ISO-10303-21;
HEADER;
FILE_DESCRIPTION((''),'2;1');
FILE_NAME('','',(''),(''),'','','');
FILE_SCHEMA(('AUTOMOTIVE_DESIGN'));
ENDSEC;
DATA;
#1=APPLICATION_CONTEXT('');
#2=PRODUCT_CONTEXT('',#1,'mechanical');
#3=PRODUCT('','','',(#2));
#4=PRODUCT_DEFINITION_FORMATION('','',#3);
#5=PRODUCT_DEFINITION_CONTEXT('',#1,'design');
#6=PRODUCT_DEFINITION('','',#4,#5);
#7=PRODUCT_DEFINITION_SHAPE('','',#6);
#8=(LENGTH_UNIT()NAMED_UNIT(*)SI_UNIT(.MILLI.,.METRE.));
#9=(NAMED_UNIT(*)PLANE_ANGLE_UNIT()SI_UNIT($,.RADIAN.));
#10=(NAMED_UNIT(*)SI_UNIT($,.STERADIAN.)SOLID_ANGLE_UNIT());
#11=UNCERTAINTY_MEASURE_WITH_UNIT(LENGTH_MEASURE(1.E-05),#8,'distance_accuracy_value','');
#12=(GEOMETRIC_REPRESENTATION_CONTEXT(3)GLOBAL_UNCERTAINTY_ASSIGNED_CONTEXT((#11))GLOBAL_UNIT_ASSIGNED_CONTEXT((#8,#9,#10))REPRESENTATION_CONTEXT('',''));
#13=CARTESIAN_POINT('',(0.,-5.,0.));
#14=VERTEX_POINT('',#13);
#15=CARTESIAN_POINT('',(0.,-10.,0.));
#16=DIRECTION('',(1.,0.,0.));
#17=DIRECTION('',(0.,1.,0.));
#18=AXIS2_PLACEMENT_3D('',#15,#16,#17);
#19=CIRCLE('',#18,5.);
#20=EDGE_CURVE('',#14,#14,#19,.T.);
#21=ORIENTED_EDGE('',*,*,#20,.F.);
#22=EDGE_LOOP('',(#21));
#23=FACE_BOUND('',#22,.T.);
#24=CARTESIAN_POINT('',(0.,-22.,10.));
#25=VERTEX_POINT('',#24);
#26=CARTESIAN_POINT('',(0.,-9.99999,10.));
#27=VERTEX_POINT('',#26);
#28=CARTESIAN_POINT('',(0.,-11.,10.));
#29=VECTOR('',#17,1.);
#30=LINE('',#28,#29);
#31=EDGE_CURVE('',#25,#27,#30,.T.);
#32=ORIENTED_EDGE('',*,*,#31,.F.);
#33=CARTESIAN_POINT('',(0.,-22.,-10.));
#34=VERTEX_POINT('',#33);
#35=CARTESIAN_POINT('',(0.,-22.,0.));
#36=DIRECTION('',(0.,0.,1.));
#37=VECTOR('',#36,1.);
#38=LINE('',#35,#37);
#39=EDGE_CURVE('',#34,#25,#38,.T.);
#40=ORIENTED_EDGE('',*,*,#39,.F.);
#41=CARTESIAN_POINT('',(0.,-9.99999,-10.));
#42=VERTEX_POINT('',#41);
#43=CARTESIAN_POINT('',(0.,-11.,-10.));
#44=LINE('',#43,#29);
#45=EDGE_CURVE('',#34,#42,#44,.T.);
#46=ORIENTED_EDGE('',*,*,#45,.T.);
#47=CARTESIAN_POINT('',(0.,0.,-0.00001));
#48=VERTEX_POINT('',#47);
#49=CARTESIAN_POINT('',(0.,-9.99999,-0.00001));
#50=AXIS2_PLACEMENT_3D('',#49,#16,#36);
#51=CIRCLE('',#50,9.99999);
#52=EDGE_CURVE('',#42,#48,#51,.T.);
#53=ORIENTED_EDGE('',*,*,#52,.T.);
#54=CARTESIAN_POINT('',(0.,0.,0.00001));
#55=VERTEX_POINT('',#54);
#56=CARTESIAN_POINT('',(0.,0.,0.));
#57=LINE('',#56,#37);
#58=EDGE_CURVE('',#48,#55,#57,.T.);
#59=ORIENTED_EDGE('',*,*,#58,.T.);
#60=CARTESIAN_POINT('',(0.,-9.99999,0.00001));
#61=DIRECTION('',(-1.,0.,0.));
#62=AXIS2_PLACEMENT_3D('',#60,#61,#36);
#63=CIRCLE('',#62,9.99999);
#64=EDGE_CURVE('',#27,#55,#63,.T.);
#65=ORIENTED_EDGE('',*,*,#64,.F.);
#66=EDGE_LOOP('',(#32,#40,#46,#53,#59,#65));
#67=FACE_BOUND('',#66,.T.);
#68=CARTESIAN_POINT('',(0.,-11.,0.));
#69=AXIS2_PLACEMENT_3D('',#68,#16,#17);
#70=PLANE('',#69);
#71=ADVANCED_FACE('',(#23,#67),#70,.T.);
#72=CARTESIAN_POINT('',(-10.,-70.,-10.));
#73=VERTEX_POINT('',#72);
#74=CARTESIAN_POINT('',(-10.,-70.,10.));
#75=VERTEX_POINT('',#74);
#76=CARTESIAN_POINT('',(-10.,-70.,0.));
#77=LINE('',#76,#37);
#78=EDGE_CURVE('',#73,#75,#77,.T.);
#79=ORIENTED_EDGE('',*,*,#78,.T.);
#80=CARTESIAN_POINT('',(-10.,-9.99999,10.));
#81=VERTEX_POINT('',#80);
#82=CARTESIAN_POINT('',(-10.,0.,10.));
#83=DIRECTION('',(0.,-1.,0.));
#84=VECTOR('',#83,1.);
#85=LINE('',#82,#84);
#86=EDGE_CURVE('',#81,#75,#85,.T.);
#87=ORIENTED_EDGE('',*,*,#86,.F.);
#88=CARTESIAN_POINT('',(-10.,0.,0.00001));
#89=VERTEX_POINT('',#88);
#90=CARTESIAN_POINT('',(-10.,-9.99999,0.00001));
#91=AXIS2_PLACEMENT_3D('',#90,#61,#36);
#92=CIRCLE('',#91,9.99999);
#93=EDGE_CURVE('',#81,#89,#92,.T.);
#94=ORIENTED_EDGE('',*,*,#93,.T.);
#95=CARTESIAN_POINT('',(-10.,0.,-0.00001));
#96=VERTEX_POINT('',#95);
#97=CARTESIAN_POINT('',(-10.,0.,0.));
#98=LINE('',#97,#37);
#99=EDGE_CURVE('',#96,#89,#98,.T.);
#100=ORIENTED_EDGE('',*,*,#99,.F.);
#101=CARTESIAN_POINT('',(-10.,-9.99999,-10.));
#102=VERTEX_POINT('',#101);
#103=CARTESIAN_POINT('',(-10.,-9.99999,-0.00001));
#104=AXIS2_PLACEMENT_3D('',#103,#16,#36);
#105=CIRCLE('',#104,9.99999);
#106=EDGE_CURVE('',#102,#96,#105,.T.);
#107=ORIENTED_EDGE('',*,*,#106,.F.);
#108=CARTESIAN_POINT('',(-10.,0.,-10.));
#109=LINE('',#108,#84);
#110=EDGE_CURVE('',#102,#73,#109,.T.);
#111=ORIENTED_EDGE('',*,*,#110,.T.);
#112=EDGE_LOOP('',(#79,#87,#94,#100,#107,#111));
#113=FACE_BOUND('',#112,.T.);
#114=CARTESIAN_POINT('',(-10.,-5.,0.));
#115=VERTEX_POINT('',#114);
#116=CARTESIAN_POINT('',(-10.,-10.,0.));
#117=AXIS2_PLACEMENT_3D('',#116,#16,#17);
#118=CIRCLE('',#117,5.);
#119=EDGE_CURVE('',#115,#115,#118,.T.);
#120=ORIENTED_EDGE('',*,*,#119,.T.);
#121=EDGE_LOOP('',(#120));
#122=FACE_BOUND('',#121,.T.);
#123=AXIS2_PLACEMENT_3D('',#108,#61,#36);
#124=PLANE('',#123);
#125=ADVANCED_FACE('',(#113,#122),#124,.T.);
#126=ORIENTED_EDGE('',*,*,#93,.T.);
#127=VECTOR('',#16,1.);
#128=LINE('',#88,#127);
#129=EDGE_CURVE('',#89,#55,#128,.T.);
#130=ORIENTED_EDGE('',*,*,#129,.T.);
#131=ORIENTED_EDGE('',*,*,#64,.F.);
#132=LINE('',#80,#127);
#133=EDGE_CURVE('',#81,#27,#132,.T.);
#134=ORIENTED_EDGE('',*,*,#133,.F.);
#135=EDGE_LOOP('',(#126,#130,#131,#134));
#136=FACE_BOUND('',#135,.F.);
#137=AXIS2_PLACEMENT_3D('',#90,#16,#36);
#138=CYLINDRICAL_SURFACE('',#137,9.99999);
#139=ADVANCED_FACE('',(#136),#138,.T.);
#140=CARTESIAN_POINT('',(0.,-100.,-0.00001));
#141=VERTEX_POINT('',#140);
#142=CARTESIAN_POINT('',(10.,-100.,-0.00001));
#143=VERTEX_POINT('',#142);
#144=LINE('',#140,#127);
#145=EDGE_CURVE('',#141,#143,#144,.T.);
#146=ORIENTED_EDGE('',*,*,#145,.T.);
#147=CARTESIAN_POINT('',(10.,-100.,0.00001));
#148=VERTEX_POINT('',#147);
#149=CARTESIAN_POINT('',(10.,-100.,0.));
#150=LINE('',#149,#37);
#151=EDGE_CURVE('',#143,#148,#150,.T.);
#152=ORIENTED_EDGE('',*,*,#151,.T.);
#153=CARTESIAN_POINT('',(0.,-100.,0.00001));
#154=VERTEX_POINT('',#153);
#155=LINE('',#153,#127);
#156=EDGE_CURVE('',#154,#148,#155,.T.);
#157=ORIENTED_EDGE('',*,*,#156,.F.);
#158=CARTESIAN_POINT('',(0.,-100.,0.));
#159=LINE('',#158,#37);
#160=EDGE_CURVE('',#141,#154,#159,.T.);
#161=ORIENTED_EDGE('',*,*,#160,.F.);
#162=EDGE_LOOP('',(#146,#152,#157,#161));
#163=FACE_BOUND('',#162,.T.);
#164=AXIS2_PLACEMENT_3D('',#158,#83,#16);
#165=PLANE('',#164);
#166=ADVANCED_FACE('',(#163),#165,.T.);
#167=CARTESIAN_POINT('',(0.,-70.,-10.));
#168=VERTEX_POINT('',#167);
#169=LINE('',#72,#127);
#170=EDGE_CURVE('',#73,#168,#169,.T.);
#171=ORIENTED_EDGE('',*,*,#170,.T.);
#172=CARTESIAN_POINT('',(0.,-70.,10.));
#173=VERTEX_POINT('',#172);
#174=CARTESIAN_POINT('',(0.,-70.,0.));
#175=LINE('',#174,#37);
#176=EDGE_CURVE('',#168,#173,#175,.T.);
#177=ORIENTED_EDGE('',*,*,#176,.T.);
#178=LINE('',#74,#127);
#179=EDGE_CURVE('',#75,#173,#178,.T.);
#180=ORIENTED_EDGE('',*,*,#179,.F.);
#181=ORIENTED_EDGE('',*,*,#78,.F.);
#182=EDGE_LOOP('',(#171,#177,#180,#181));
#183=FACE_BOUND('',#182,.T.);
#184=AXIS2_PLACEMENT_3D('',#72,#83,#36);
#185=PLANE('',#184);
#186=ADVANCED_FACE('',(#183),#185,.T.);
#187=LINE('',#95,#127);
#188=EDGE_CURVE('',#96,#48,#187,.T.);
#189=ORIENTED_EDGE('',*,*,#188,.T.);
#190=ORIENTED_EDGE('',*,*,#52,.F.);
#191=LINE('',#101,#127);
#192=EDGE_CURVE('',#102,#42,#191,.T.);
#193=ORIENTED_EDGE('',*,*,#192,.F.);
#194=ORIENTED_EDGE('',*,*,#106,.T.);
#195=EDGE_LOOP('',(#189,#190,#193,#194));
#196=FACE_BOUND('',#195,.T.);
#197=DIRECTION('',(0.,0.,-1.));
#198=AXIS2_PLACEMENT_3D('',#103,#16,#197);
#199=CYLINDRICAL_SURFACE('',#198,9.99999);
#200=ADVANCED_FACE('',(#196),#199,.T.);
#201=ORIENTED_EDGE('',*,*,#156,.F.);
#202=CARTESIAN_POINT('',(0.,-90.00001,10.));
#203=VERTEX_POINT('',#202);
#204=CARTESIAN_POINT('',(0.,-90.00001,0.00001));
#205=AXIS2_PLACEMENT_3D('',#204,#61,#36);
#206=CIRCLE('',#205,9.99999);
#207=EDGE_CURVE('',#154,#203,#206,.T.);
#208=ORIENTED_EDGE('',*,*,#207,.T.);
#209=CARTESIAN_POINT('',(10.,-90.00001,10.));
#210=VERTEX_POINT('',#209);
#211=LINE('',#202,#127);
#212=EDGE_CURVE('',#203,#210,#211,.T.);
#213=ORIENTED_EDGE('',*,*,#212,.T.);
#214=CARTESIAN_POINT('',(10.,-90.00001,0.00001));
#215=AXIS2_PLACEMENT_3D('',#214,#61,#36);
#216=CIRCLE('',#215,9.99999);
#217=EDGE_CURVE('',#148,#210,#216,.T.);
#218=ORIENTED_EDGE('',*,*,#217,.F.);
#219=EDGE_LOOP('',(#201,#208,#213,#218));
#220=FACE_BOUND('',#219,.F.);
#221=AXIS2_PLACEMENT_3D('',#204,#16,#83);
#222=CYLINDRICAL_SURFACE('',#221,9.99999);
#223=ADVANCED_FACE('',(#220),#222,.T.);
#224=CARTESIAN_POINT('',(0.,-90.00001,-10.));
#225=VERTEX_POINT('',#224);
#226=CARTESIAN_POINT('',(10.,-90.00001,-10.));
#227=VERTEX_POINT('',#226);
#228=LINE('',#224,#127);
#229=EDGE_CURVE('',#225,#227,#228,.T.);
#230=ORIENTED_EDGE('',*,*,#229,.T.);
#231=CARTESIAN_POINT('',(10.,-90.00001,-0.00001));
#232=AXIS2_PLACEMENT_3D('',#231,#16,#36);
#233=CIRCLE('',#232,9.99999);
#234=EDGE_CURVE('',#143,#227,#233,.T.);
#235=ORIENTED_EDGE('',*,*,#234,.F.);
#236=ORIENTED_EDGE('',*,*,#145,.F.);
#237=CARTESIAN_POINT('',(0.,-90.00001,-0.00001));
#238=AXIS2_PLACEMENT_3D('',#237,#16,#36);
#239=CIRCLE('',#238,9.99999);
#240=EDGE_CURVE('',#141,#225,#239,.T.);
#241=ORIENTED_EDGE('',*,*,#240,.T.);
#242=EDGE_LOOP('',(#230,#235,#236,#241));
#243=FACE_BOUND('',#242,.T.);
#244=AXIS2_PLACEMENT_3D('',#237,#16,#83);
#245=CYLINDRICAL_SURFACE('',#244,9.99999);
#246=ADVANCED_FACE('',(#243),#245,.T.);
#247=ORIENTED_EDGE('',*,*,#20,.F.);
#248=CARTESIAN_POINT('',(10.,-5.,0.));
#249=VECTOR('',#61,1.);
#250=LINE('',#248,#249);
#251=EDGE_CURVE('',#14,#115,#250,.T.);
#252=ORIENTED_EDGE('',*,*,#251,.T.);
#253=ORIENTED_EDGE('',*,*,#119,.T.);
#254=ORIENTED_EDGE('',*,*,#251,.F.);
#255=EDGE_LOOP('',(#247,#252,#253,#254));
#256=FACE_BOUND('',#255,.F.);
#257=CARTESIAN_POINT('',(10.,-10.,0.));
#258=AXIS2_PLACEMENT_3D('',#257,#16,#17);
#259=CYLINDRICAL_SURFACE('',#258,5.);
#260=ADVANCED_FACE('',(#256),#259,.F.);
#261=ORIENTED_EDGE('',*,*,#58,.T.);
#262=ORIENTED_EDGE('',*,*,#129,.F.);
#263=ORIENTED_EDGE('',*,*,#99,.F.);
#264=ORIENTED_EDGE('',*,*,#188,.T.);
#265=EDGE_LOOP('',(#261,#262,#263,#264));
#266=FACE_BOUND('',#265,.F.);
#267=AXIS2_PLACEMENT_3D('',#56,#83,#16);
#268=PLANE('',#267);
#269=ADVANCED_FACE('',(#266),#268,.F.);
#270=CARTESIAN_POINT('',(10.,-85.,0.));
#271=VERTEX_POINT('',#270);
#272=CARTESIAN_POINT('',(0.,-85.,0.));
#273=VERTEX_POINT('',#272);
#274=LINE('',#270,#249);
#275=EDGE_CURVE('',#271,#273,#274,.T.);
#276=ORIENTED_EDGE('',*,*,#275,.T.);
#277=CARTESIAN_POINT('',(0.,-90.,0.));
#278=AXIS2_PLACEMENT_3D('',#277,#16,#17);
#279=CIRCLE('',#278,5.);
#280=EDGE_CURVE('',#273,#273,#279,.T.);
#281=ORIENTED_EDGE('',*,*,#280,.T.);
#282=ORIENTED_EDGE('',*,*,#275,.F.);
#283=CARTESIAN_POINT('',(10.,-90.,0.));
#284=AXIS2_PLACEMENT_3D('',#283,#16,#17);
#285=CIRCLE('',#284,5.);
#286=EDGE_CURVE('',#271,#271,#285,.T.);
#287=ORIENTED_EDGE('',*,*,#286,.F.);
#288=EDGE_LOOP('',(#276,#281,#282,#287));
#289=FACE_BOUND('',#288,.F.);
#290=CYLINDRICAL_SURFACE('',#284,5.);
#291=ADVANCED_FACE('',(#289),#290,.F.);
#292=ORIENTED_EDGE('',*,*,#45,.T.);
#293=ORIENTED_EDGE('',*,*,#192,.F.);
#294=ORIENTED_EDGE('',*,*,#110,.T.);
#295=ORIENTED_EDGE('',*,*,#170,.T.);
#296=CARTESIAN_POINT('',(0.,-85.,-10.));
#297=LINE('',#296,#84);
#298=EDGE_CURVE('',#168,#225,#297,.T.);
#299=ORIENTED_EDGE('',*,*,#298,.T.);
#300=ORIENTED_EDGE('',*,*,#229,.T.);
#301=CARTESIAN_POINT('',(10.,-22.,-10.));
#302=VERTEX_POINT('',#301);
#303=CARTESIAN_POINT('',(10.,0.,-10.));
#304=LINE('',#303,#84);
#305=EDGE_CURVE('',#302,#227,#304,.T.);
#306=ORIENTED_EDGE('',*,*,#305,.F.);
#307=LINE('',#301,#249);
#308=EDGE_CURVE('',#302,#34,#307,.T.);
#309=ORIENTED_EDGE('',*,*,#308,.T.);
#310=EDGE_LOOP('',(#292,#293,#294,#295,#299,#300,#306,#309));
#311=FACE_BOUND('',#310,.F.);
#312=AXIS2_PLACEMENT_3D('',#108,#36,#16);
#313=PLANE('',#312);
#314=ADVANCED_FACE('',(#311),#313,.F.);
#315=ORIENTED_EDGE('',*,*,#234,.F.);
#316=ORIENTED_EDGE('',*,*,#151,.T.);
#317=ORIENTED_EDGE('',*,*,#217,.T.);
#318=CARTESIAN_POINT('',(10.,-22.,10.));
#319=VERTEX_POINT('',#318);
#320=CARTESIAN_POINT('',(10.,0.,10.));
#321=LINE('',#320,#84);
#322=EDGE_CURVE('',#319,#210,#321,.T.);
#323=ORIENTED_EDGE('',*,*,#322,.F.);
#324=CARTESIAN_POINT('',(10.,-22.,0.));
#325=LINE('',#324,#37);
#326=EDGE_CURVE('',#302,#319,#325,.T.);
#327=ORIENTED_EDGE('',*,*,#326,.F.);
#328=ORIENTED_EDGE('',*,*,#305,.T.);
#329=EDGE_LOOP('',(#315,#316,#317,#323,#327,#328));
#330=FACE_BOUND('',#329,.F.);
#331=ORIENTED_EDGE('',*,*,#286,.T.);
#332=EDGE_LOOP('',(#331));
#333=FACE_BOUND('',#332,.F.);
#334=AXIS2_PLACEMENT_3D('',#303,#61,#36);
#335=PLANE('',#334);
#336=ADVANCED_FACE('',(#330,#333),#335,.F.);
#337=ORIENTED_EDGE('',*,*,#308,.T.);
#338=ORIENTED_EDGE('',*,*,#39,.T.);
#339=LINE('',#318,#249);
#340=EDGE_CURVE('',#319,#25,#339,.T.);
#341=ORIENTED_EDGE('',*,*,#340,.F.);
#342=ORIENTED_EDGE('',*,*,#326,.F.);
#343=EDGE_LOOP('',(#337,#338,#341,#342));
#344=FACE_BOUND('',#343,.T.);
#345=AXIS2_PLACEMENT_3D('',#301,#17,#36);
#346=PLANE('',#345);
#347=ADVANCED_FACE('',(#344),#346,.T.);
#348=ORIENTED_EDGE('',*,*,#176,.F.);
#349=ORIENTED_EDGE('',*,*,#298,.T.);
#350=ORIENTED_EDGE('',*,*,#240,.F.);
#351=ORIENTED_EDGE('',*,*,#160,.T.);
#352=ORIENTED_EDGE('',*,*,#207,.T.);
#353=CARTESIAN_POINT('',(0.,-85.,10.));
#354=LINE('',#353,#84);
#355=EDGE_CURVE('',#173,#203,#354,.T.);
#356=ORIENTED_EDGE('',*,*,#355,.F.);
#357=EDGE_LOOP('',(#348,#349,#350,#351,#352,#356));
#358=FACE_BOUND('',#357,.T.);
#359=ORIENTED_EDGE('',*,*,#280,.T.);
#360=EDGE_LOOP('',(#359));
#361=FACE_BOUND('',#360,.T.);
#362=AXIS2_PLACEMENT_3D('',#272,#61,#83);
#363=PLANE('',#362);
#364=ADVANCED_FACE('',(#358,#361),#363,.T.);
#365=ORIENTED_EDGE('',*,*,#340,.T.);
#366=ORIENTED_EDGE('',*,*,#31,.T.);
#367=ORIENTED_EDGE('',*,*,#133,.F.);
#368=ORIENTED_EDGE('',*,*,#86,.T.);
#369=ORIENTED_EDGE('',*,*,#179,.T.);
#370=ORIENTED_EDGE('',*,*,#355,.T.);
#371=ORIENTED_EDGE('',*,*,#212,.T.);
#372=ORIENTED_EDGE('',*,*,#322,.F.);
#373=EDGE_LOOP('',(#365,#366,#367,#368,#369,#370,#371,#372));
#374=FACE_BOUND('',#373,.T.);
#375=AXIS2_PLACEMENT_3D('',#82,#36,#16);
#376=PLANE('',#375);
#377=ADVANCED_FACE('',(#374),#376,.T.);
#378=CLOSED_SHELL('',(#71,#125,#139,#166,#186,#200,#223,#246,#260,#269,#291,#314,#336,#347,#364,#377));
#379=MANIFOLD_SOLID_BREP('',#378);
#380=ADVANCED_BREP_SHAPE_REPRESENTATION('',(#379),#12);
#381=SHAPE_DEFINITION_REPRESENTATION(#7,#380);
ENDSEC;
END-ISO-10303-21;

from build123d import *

# Parameters (mm, degrees)
F0_W     = 20
F0_H     = 20
F1_DEPTH = 100
F2_R     = 5
F3_DEPTH = 20.001
F4_R     = 5
F5_DEPTH = 20.001
F6_W     = 22
F6_H     = 20
F6_R     = 5
F7_DEPTH = 10
F8_W     = 30
F8_H     = 20
F8_R     = 5
F9_DEPTH = 10
F10_R    = 9.99999


# Not quite as in the source:
# - a fillet or chamfer is up to 0.001 mm smaller than in the source, because OpenCascade refuses the exact size


with BuildPart() as f1:
    # F0 (on Front) → F1 (new body)
    with BuildSketch(Plane.XZ):
        Rectangle(F0_W, F0_H)
    extrude(amount=F1_DEPTH)

    # F2 (on face) → F3 (cut, through all)
    with BuildSketch(Plane.YZ.offset(10)):
        with Locations((-90, 0)):
            Circle(F2_R)
    extrude(amount=-F3_DEPTH, mode=Mode.SUBTRACT)

    # F4 (on face) → F5 (cut, through all)
    with BuildSketch(Plane.YZ.offset(10)):
        with Locations((-10, 0)):
            Circle(F4_R)
    extrude(amount=-F5_DEPTH, mode=Mode.SUBTRACT)

    # F6 (on face) → F7 (cut)
    with BuildSketch(Plane.YZ.offset(10)):
        with Locations((-11, 0)):
            Rectangle(F6_W, F6_H)
        with Locations((-10, 0)):
            Circle(F6_R, mode=Mode.SUBTRACT)
    extrude(amount=-F7_DEPTH, mode=Mode.SUBTRACT)

    # F8 (on face) → F9 (cut)
    with BuildSketch(Plane(origin=(-10, 0, 0), x_dir=(0, -1, 0), z_dir=(-1, 0, 0))):
        with Locations((85, 0)):
            Rectangle(F8_W, F8_H)
        with Locations((90, 0)):
            Circle(F8_R, mode=Mode.SUBTRACT)
    extrude(amount=-F9_DEPTH, mode=Mode.SUBTRACT)

    # F10 (radius 10 in the source; OpenCascade refuses exactly that, so slightly less here)
    f10_edges = [f1.edges().sort_by_distance(p)[0] for p in [
        (5, -100, 10),
        (5, -100, -10),
        (-5, 0, -10),
        (-5, 0, 10),
    ]]
    fillet(f10_edges, radius=F10_R)


solid = f1.part
